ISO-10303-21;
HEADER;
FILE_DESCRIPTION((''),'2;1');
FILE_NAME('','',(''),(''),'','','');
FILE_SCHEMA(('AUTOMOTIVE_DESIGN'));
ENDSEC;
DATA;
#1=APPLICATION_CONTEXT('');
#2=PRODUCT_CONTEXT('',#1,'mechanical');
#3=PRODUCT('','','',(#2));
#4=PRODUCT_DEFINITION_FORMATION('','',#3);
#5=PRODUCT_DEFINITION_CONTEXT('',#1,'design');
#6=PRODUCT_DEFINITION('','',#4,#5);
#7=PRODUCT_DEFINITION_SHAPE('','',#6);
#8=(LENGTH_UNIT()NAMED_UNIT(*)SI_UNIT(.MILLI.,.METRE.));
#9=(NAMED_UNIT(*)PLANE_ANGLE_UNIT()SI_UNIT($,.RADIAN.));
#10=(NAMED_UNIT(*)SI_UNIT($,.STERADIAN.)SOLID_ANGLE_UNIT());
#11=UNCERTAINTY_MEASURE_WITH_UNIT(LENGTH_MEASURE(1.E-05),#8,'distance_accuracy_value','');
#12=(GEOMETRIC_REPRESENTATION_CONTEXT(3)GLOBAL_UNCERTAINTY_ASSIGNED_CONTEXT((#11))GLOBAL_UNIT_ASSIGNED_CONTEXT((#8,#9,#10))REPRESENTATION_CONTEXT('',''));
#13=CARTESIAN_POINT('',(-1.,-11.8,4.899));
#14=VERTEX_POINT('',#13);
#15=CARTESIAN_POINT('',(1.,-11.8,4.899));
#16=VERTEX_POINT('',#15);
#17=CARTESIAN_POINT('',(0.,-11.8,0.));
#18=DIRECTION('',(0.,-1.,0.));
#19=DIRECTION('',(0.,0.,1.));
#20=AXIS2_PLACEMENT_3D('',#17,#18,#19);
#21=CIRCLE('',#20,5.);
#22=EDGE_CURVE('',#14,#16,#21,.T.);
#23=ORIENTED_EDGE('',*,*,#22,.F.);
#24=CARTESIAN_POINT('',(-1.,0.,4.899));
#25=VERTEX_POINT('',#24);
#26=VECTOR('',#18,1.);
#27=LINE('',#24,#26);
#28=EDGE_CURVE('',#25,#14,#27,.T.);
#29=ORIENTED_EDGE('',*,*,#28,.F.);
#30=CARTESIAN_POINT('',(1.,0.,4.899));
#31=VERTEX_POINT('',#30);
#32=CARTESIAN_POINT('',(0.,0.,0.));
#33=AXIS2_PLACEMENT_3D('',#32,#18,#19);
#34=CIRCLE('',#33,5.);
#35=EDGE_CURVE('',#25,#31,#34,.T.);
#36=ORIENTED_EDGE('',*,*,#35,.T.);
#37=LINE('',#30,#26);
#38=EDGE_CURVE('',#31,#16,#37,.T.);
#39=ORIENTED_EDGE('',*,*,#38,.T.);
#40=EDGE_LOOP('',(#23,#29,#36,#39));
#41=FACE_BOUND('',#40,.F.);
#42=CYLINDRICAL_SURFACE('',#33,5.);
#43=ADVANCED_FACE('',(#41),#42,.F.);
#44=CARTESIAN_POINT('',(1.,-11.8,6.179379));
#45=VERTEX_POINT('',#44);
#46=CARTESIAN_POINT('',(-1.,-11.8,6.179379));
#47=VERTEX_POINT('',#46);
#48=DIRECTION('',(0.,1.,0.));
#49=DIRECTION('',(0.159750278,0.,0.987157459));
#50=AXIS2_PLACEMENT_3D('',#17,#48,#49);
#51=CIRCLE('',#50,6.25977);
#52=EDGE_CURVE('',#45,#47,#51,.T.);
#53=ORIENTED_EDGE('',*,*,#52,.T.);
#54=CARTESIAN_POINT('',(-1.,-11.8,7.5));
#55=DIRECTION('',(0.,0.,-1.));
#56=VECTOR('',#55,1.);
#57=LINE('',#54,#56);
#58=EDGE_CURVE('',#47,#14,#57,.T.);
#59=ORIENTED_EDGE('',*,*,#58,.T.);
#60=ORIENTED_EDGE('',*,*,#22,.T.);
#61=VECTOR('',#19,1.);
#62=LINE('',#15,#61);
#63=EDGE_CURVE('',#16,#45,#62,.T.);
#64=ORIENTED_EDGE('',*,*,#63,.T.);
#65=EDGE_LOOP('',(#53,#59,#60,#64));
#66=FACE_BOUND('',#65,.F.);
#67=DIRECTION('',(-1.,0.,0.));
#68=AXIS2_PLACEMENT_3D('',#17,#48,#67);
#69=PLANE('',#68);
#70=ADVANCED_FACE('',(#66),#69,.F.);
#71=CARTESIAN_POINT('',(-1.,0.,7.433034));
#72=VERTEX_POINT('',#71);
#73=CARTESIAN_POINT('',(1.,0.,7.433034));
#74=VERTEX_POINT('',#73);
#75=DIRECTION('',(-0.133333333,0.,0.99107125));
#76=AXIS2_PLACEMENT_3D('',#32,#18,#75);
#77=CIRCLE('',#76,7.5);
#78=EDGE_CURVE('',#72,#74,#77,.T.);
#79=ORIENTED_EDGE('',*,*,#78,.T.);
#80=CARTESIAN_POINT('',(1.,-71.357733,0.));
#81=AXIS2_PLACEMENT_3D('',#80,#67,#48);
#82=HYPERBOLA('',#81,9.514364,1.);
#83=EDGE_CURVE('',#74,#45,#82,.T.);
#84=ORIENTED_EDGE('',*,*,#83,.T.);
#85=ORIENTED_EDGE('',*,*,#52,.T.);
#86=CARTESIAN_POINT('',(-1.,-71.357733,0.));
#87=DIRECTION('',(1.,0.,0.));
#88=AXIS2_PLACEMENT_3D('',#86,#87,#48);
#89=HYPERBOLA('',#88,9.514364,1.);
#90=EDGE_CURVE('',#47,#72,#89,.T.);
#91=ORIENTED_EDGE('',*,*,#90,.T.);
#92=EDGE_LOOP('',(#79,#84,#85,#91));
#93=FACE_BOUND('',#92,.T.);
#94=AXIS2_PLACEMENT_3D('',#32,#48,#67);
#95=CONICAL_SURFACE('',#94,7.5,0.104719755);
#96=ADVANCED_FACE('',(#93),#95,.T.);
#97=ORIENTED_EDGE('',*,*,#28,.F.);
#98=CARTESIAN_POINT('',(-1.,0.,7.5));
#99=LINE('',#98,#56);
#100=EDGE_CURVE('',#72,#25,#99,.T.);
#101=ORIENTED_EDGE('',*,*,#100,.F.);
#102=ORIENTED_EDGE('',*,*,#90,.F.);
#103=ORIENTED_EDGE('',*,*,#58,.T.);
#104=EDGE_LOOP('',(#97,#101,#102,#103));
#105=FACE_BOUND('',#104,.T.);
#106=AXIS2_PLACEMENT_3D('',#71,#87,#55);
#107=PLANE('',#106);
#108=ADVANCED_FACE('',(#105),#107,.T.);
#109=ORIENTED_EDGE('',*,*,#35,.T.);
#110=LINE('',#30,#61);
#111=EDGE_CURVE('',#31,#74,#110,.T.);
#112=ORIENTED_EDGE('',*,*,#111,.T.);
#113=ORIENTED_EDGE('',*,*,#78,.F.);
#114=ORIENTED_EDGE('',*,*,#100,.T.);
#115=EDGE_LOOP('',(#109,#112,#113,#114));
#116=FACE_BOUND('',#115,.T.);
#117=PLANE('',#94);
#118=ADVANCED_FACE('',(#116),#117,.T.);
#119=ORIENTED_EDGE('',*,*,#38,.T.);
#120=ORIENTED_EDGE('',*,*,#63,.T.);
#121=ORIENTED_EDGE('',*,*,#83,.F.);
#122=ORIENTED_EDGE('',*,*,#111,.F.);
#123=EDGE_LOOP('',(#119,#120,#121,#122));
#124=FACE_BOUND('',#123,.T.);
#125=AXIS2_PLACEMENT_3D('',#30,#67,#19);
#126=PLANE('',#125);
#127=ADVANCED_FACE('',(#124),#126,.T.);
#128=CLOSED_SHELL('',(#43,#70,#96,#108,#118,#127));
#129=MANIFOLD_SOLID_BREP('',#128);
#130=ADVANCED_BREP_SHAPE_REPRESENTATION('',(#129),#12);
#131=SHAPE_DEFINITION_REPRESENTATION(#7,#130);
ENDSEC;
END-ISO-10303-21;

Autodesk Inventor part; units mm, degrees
ref_plane "YZ Plane" through (0, 0, 0) normal (1, 0, 0) x (0, 1, 0)
ref_plane "XZ Plane" through (0, 0, 0) normal (0, 1, 0) x (-1, 0, 0)
ref_plane "XY Plane" through (0, 0, 0) normal (0, 0, 1) x (1, 0, 0)
sketch "Skizze1" plane through (0, 0, 0) normal (0, 1, 0) x (-1, 0, 0)
  circle A0 centre (0, 0) radius 7.5
  dimension "d0" = 15
extrude "Extrusion1" add sketch "Skizze1" against normal blind 11.8
draft "Flächenverjüngung1" angle 6 pull direction (0, -1, 0) faces at (-7.4757, -7.8667, -0.6035) fixed edges at (7.5, 0, 0)
sketch "Skizze2" plane through (0, 0, 0) normal (0, 1, 0) x (1, 0, 0)
  circle A0 centre (0, 0) radius 7.5 projected
hole "Bohrung1" at (0, 0, 0) direction (0, -1, 0) diameter 10 depth 11.8
sketch "Skizze4" plane through (0, 0, 0) normal (0, 1, 0) x (1, 0, 0)
  line L0 (1, -7.5) -> (-1, -7.5)
  line L1 (-1, -7.5) -> (-1, -4.899)
  line L2 (1, -4.899) -> (1, -7.5)
  circle A0 centre (0, 0) radius 5 projected
  circle A1 centre (0, 0) radius 7.5 projected
  point P0 (0, -7.5)
  point P1 (-1, -7.433)
  point P2 (1, -7.433)
  point P3 (0, -7.5)
  dimension "d12" = 2
extrude "Extrusion2" cut sketch "Skizze4" against normal up to surface (11.8 mm away) contours A1 L1 A0 L2 picked at (0, -5.8258)
properties part number "konus"
